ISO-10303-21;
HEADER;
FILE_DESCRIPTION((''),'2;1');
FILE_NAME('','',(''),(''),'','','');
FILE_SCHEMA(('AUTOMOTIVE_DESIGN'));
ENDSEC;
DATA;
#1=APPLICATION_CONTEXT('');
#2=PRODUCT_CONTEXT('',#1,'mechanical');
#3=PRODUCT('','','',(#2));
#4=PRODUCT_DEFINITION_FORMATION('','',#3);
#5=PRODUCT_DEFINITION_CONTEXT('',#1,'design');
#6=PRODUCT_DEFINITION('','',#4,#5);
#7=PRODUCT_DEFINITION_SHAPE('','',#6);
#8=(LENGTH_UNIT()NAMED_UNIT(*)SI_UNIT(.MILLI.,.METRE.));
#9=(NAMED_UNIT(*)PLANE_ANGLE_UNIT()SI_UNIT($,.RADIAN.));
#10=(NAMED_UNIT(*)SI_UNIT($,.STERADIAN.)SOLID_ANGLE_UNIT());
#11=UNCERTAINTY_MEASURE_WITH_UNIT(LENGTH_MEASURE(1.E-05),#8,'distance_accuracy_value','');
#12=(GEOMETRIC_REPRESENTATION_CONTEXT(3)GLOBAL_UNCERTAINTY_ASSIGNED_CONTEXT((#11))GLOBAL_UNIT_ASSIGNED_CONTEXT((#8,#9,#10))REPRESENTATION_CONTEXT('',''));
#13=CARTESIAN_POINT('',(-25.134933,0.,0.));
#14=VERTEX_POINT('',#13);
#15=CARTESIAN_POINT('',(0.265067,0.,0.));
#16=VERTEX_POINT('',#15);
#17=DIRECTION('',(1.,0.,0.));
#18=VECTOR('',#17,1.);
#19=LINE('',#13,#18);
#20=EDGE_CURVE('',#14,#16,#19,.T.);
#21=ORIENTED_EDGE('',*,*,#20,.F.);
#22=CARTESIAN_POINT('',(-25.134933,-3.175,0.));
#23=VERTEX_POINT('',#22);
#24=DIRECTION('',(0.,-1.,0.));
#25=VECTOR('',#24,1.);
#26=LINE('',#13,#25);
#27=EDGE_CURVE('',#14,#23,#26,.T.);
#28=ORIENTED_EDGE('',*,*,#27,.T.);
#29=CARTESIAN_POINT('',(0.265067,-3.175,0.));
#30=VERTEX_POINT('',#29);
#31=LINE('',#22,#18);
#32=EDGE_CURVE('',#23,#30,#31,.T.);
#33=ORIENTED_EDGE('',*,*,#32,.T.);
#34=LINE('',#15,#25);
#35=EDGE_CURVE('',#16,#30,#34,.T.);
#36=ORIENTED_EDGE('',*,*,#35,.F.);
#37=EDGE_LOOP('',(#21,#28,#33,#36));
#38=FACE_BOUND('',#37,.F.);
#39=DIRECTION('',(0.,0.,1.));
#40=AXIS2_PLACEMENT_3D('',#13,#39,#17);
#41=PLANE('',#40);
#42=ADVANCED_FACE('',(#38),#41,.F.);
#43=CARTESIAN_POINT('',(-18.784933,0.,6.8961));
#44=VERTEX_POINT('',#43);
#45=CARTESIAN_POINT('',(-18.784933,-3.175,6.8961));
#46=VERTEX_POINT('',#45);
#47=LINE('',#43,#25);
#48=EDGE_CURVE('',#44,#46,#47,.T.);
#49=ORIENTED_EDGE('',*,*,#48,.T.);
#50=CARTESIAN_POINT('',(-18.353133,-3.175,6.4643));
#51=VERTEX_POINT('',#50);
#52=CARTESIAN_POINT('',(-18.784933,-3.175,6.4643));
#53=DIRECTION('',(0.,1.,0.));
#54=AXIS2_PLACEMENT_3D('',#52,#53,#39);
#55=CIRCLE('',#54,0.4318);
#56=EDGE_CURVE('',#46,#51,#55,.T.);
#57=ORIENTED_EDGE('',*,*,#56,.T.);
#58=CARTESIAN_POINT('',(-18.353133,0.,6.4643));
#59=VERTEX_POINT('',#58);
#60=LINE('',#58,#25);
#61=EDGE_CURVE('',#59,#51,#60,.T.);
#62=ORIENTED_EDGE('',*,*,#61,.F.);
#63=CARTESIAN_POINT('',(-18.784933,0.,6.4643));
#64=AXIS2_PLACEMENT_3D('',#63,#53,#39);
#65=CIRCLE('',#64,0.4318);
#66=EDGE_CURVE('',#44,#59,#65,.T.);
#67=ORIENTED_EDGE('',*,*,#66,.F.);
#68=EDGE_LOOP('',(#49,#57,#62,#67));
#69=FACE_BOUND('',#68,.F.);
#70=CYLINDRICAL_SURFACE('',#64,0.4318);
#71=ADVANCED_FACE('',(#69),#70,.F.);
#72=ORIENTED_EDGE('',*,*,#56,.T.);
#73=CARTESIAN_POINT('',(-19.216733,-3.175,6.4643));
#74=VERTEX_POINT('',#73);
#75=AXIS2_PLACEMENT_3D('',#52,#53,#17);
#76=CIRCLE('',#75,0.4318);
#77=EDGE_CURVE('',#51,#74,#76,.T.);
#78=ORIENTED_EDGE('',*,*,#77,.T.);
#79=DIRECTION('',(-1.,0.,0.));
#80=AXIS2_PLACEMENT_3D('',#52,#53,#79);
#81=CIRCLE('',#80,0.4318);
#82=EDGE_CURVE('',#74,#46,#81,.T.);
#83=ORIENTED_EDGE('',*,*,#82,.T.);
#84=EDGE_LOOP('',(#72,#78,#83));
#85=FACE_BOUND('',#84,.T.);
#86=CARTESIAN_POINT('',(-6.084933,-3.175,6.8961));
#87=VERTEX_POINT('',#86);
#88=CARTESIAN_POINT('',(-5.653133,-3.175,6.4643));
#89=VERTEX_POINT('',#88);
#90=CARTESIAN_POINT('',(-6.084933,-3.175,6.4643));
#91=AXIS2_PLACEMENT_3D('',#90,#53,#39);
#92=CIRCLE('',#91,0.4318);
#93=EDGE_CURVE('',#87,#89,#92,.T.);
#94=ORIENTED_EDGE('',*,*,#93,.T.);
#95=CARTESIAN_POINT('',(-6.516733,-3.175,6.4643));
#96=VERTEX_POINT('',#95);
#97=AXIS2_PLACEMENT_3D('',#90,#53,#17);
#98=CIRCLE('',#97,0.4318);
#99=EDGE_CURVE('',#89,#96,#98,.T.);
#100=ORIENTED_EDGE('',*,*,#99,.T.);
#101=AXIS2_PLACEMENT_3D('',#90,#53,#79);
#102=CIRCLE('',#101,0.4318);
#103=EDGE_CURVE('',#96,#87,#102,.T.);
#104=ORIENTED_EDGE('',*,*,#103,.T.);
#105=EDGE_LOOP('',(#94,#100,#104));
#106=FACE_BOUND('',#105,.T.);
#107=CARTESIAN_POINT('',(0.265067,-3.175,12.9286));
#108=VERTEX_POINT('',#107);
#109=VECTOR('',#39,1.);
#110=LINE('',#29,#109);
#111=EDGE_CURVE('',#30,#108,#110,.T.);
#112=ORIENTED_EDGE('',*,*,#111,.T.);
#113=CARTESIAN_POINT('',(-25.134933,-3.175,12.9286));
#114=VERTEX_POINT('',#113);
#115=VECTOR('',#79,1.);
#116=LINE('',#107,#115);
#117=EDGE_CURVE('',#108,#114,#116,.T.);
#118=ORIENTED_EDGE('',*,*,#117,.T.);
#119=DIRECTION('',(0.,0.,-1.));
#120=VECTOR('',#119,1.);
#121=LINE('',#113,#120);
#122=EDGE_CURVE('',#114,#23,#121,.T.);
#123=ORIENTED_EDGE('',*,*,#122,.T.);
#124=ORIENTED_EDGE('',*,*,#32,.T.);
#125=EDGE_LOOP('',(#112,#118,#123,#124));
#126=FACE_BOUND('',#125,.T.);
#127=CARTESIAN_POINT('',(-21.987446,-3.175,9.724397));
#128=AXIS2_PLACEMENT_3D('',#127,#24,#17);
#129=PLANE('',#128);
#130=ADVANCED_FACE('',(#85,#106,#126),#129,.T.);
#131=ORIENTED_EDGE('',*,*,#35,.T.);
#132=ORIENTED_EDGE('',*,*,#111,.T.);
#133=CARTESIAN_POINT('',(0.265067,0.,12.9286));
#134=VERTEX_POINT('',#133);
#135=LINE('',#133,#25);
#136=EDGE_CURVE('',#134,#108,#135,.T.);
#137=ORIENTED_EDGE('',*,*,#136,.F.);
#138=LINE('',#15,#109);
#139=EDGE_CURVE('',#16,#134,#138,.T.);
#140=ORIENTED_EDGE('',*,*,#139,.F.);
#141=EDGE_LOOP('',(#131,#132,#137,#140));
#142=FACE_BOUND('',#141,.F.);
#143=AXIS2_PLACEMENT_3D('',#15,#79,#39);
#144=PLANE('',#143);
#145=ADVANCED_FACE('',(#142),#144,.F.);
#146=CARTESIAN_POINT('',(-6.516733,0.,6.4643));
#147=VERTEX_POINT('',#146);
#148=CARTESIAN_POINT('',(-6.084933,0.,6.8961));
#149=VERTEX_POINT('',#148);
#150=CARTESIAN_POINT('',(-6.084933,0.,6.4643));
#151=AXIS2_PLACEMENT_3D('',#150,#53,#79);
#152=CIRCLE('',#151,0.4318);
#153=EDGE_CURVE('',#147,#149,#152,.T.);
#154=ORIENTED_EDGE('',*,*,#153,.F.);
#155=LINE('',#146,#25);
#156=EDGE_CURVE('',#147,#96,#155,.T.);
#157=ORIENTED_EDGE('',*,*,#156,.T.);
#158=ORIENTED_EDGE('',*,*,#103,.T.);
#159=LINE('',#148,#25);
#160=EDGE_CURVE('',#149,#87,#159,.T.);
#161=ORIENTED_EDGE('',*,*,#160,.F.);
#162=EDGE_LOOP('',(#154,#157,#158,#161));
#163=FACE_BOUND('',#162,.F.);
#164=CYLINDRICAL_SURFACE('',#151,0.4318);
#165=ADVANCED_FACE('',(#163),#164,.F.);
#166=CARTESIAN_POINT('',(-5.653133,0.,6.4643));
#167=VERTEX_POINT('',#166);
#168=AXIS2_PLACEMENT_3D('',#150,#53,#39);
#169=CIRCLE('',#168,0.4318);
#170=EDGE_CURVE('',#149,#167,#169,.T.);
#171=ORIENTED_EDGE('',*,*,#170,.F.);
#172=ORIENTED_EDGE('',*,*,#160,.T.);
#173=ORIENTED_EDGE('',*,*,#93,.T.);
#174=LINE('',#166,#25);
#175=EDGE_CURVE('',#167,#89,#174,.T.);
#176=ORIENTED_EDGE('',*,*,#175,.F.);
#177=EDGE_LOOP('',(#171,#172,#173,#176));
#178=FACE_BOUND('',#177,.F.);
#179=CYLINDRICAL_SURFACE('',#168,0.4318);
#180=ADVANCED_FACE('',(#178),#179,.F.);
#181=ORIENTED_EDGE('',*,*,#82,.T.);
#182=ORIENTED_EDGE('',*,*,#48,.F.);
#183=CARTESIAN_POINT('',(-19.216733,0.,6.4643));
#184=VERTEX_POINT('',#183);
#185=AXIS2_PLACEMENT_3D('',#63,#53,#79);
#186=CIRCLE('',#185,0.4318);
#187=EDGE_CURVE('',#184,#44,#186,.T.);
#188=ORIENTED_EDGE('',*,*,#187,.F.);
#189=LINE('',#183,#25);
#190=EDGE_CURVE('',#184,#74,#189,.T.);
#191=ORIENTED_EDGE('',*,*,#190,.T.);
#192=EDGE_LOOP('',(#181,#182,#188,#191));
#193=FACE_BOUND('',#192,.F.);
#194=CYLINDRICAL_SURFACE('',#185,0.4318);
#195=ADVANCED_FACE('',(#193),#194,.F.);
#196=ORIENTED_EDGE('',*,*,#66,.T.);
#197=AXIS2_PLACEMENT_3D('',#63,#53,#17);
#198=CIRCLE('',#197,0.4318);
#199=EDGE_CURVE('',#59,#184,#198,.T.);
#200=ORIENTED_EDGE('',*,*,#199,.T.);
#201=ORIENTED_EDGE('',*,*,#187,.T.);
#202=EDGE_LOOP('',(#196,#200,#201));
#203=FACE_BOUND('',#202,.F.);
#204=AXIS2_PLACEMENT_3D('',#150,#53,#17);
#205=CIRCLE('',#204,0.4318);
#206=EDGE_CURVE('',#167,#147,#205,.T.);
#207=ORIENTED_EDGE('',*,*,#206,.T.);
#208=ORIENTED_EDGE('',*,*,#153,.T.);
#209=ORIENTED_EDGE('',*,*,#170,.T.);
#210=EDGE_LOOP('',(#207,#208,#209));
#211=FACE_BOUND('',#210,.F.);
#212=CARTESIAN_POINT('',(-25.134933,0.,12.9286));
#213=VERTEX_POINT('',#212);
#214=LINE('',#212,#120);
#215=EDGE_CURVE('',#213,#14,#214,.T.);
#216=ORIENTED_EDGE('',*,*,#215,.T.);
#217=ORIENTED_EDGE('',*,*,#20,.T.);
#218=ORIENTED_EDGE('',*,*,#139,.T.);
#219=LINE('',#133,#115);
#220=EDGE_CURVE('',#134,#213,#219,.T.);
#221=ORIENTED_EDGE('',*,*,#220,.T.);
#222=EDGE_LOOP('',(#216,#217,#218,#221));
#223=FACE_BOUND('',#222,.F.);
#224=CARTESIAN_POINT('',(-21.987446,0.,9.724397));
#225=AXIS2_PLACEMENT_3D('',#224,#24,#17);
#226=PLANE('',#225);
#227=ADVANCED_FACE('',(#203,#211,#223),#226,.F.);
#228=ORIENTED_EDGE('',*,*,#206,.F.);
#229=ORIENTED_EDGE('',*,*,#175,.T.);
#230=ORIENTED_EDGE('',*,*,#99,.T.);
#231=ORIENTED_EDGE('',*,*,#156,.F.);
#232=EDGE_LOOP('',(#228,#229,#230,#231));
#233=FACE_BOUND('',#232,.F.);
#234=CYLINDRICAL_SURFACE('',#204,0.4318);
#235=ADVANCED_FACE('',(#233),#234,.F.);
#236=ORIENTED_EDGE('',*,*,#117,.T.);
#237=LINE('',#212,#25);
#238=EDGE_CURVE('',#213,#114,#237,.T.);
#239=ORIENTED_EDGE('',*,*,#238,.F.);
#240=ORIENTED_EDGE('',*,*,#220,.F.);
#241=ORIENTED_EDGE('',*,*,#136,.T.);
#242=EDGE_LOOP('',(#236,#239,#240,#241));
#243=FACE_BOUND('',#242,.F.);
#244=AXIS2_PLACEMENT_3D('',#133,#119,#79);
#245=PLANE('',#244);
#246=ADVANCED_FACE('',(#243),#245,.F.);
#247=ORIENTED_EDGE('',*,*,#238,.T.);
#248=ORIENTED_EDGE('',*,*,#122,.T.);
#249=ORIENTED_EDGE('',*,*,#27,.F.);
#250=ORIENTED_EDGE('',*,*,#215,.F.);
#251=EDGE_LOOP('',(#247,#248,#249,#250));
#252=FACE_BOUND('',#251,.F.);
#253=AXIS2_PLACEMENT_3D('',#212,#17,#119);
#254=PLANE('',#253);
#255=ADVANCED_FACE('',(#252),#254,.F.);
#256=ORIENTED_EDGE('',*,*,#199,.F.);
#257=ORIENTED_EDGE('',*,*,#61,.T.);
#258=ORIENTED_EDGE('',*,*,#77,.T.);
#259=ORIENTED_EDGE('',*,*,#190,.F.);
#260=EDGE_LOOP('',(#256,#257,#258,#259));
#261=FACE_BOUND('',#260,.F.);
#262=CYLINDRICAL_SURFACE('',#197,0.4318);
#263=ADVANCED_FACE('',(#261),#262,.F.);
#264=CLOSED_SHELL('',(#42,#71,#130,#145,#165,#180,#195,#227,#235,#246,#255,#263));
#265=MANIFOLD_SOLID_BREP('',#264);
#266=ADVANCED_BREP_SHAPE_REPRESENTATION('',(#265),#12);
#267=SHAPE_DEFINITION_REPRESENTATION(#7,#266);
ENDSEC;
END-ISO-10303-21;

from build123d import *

# Parameters (mm, degrees)
F1_DEPTH = 3.175


with BuildPart() as f1:
    # F0 (on Front) → F1 (new body)
    with BuildSketch(Plane.XZ):
        with BuildLine():
            Line((-18.7849326355, 12.9286), (-25.1349326355, 12.9286))
            Line((-25.1349326355, 12.9286), (-25.1349326355, 6.4643))
            Line((-25.1349326355, 6.4643), (-19.2167326355, 6.4643))
            ThreePointArc((-19.2167326355, 6.4643), (-19.0902613436, 6.7696287081), (-18.7849326355, 6.8961))
            Line((-18.7849326355, 6.8961), (-18.7849326355, 12.9286))
        make_face()
        with BuildLine():
            Line((-12.4349326355, 12.9286), (-18.7849326355, 12.9286))
            Line((-18.7849326355, 12.9286), (-18.7849326355, 6.8961))
            ThreePointArc((-18.7849326355, 6.8961), (-18.4796039274, 6.7696287081), (-18.3531326355, 6.4643))
            Line((-18.3531326355, 6.4643), (-12.4349326355, 6.4643))
            Line((-12.4349326355, 6.4643), (-12.4349326355, 12.9286))
        make_face()
        with BuildLine():
            Line((-6.0849326355, 12.9286), (-12.4349326355, 12.9286))
            Line((-12.4349326355, 12.9286), (-12.4349326355, 6.4643))
            Line((-12.4349326355, 6.4643), (-6.5167326355, 6.4643))
            ThreePointArc((-6.5167326355, 6.4643), (-6.3902613436, 6.7696287081), (-6.0849326355, 6.8961))
            Line((-6.0849326355, 6.8961), (-6.0849326355, 12.9286))
        make_face()
        with BuildLine():
            Line((0.2650673645, 12.9286), (-6.0849326355, 12.9286))
            Line((-6.0849326355, 12.9286), (-6.0849326355, 6.8961))
            ThreePointArc((-6.0849326355, 6.8961), (-5.7796039274, 6.7696287081), (-5.6531326355, 6.4643))
            Line((-5.6531326355, 6.4643), (0.2650673645, 6.4643))
            Line((0.2650673645, 6.4643), (0.2650673645, 12.9286))
        make_face()
        with BuildLine():
            Line((-19.2167326355, 6.4643), (-25.1349326355, 6.4643))
            Line((-25.1349326355, 6.4643), (-25.1349326355, 0))
            Line((-25.1349326355, 0), (-12.4349326355, 0))
            Line((-12.4349326355, 0), (-12.4349326355, 6.4643))
            Line((-12.4349326355, 6.4643), (-18.3531326355, 6.4643))
            ThreePointArc((-18.3531326355, 6.4643), (-18.7849326355, 6.0325), (-19.2167326355, 6.4643))
        make_face()
        with BuildLine():
            Line((-6.5167326355, 6.4643), (-12.4349326355, 6.4643))
            Line((-12.4349326355, 6.4643), (-12.4349326355, 0))
            Line((-12.4349326355, 0), (0.2650673645, 0))
            Line((0.2650673645, 0), (0.2650673645, 6.4643))
            Line((0.2650673645, 6.4643), (-5.6531326355, 6.4643))
            ThreePointArc((-5.6531326355, 6.4643), (-6.0849326355, 6.0325), (-6.5167326355, 6.4643))
        make_face()
    extrude(amount=F1_DEPTH)


solid = f1.part
